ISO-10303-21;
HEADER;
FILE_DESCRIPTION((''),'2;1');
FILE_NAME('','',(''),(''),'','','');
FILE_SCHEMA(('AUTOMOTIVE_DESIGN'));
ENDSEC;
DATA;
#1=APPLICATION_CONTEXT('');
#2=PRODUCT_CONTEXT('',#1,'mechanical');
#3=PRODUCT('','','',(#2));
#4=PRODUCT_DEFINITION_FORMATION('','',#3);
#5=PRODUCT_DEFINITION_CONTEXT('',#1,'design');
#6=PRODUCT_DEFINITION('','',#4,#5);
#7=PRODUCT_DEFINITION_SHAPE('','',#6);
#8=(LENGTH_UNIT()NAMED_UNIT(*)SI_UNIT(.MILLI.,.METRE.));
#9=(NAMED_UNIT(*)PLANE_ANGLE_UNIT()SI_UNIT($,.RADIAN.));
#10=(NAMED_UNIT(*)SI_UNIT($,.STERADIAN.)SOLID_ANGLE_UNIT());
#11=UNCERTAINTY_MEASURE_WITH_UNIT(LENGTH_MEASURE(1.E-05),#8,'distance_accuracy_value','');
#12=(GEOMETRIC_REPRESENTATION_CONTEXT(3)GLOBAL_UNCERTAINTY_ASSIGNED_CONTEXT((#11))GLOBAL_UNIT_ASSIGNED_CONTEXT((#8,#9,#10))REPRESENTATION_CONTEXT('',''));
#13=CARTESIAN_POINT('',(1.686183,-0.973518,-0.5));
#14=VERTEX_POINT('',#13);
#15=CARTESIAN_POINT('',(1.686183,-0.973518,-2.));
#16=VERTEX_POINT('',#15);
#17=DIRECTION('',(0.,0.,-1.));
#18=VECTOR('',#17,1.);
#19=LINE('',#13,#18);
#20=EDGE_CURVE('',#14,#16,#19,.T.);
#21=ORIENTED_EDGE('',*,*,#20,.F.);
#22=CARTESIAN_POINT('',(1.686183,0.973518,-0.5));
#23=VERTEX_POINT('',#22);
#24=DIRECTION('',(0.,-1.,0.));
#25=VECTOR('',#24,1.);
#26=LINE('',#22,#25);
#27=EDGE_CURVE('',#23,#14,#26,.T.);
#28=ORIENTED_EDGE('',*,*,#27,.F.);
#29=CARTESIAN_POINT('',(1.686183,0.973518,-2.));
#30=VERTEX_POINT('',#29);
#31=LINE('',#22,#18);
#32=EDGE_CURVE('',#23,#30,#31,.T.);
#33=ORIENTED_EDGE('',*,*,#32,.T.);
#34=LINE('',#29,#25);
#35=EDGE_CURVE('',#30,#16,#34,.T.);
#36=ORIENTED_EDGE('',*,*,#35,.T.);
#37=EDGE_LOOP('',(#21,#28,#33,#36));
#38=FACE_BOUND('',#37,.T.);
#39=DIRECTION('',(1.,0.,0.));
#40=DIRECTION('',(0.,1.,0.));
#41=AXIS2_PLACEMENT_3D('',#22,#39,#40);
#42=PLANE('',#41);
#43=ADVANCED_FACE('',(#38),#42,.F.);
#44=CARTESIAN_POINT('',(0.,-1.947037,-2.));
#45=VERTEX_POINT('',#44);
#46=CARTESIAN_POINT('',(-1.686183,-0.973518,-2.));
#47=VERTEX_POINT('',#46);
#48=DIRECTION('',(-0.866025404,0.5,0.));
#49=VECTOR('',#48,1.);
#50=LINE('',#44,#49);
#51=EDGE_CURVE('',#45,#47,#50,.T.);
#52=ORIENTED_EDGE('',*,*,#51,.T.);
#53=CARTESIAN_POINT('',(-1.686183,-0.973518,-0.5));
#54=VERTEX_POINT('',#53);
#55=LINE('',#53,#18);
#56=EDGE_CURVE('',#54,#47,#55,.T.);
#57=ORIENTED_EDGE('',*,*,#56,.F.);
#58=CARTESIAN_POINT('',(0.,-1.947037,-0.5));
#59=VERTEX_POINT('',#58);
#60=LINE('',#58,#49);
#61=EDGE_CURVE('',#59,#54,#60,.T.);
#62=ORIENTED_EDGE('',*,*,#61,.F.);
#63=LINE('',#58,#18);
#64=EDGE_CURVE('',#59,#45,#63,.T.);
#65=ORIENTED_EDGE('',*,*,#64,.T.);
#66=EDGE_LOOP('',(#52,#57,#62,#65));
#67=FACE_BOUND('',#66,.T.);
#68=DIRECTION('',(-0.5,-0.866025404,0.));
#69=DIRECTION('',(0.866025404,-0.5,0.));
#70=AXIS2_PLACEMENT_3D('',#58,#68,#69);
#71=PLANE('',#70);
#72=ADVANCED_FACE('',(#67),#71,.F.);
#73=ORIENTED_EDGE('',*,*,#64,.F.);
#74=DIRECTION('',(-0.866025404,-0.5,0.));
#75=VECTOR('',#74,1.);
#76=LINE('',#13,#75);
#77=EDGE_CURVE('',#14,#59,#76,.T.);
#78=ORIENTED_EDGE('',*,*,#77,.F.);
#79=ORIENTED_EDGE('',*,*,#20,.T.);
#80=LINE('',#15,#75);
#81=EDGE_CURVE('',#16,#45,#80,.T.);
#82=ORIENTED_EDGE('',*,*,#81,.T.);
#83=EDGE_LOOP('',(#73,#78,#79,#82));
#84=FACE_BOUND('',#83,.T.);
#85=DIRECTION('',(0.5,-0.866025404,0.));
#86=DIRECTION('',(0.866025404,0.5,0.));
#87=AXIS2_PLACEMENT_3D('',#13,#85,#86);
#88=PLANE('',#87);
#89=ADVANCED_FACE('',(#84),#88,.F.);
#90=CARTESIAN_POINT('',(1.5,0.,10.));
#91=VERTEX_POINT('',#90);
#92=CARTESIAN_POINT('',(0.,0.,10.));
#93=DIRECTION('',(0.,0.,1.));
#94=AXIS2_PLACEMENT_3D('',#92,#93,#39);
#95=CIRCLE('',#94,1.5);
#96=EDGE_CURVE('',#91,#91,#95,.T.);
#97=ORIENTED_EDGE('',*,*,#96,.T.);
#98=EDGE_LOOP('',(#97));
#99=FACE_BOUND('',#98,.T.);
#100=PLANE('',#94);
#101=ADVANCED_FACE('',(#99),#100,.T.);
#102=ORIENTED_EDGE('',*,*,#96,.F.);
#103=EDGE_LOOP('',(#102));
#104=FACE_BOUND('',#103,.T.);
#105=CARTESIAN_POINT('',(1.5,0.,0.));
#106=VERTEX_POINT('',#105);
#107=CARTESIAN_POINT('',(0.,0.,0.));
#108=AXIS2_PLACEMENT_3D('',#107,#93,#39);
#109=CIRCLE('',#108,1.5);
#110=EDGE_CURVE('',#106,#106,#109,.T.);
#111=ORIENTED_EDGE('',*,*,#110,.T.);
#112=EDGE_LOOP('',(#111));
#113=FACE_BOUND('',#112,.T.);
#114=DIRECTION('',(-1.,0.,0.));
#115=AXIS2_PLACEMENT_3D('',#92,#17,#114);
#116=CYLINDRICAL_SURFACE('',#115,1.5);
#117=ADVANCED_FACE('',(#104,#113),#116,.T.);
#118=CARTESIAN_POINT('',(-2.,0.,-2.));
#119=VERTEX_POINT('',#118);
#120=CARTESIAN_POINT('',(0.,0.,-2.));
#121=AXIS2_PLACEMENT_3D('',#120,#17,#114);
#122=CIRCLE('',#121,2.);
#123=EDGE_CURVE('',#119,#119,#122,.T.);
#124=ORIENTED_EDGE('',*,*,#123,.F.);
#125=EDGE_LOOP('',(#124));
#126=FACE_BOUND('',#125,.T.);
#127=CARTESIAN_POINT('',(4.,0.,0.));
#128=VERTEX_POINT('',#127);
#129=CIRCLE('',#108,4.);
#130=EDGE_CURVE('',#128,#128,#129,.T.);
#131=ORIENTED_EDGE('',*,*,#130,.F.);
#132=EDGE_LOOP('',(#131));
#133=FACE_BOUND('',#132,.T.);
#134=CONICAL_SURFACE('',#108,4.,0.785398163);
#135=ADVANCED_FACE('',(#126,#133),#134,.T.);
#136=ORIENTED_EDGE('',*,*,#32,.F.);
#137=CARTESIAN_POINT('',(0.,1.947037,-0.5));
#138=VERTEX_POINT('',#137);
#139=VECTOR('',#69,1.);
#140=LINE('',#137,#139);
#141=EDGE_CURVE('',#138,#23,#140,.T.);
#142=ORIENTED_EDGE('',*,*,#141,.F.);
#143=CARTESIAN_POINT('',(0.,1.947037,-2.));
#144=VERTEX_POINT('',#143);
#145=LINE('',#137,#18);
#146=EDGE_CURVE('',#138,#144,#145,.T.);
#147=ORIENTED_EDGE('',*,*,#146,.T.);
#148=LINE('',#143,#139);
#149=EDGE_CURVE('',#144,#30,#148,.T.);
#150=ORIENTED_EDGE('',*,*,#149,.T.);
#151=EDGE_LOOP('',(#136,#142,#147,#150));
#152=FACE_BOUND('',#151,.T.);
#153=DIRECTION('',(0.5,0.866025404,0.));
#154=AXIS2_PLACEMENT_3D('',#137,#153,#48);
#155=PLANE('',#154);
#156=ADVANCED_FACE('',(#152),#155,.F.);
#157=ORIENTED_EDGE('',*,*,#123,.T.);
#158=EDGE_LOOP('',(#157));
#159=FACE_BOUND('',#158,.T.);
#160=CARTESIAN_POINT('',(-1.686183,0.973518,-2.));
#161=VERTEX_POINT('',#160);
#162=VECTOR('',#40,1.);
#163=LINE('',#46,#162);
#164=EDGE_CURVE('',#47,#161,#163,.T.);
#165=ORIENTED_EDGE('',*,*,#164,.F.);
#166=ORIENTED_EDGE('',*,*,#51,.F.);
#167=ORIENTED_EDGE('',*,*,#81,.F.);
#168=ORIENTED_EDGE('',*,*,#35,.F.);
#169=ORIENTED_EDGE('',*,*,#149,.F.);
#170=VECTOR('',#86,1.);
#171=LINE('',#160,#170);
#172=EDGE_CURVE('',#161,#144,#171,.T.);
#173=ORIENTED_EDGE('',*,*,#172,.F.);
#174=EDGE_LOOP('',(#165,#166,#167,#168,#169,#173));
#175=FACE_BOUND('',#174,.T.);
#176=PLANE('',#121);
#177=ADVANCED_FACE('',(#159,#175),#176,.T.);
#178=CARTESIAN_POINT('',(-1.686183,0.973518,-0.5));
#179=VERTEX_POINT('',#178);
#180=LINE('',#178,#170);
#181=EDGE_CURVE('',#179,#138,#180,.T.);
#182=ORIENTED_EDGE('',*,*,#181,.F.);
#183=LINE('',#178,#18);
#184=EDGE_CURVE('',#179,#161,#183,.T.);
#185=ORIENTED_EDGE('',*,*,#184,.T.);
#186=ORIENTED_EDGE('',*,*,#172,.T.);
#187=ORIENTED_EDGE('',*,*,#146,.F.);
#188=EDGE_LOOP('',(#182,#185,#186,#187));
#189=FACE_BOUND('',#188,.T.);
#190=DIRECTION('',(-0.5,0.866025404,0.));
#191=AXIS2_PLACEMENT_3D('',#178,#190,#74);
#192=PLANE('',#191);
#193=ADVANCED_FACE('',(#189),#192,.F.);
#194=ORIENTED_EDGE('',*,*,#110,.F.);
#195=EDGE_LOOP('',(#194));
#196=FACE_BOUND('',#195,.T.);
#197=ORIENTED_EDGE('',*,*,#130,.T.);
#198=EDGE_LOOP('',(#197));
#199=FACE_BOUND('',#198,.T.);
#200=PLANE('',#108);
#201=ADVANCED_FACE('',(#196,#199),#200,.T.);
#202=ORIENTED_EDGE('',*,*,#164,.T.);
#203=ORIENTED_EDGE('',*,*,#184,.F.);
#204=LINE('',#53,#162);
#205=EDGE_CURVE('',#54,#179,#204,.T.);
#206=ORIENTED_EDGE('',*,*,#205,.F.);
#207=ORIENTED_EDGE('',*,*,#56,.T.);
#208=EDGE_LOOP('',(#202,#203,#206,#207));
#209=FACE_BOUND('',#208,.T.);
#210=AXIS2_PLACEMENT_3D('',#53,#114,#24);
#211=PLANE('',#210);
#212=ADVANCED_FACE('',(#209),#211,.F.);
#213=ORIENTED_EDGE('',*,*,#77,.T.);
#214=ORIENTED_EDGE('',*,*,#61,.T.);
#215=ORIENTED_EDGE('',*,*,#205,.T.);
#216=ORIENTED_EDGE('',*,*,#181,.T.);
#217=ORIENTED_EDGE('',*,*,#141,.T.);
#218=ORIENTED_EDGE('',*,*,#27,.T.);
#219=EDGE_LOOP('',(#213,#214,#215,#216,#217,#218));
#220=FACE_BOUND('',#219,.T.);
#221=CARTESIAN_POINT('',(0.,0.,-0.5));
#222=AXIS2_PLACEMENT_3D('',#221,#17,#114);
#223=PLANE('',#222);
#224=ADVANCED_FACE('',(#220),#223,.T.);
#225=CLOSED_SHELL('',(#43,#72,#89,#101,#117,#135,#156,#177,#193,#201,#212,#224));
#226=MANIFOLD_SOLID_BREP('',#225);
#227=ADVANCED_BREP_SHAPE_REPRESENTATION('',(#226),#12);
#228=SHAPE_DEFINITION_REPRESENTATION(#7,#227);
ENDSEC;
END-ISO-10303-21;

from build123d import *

# Parameters (mm, degrees)
SKETCH1_R           = 1.5
BOSS_EXTRUDE2_DEPTH = 10
SKETCH1_8_R         = 4
SKETCH1_8_R_2       = 1.5
BOSS_EXTRUDE4_DEPTH = 2
BOSS_EXTRUDE5_START = 2
SKETCH2_R           = 1.5
BOSS_EXTRUDE5_DEPTH = 2
CUT_EXTRUDE2_DEPTH  = 1.5
CHAMFER1_SIZE       = 2


with BuildPart() as part:
    # Sketch1 → Boss-Extrude2 (new body)
    with BuildSketch(Plane.XY):
        Circle(SKETCH1_R)
    extrude(amount=BOSS_EXTRUDE2_DEPTH)



with BuildPart() as body_2:
    # Sketch1<8> → Boss-Extrude4 (new body)
    with BuildSketch(Plane.XY):
        Circle(SKETCH1_8_R)
        Circle(SKETCH1_8_R_2, mode=Mode.SUBTRACT)
    extrude(amount=-BOSS_EXTRUDE4_DEPTH)


with BuildPart() as part_1:
    add(part.part)

    add(body_2.part)  # Boss-Extrude5 merges body 2
    # Sketch2 → Boss-Extrude5 (add)
    with BuildSketch(Plane(origin=(0, 0, 0), x_dir=(-1, 0, 0), z_dir=(0, 0, -1)).offset(BOSS_EXTRUDE5_START)):
        with Locations(Location((0, 0, 0), (0, 0, 180))):
            Circle(SKETCH2_R)
    extrude(amount=-BOSS_EXTRUDE5_DEPTH)

    # Sketch3 → Cut-Extrude2 (cut)
    with BuildSketch(Plane(origin=(0, 0, -2), x_dir=(-1, 0, 0), z_dir=(0, 0, -1))):
        Polygon((0, 1.947036768), (-1.686183303, 0.973518384), (-1.686183303, -0.973518384), (0, -1.947036768), (1.686183303, -0.973518384), (1.686183303, 0.973518384), align=None)
    extrude(amount=-CUT_EXTRUDE2_DEPTH, mode=Mode.SUBTRACT)

    # Chamfer1
    chamfer1_edges = [part_1.edges().sort_by_distance(p)[0] for p in [
        (-4, 0, -2),
    ]]
    chamfer(chamfer1_edges, length=CHAMFER1_SIZE - 0.0001)  # a hair under: the kernel refuses the full size


solid = part_1.part
